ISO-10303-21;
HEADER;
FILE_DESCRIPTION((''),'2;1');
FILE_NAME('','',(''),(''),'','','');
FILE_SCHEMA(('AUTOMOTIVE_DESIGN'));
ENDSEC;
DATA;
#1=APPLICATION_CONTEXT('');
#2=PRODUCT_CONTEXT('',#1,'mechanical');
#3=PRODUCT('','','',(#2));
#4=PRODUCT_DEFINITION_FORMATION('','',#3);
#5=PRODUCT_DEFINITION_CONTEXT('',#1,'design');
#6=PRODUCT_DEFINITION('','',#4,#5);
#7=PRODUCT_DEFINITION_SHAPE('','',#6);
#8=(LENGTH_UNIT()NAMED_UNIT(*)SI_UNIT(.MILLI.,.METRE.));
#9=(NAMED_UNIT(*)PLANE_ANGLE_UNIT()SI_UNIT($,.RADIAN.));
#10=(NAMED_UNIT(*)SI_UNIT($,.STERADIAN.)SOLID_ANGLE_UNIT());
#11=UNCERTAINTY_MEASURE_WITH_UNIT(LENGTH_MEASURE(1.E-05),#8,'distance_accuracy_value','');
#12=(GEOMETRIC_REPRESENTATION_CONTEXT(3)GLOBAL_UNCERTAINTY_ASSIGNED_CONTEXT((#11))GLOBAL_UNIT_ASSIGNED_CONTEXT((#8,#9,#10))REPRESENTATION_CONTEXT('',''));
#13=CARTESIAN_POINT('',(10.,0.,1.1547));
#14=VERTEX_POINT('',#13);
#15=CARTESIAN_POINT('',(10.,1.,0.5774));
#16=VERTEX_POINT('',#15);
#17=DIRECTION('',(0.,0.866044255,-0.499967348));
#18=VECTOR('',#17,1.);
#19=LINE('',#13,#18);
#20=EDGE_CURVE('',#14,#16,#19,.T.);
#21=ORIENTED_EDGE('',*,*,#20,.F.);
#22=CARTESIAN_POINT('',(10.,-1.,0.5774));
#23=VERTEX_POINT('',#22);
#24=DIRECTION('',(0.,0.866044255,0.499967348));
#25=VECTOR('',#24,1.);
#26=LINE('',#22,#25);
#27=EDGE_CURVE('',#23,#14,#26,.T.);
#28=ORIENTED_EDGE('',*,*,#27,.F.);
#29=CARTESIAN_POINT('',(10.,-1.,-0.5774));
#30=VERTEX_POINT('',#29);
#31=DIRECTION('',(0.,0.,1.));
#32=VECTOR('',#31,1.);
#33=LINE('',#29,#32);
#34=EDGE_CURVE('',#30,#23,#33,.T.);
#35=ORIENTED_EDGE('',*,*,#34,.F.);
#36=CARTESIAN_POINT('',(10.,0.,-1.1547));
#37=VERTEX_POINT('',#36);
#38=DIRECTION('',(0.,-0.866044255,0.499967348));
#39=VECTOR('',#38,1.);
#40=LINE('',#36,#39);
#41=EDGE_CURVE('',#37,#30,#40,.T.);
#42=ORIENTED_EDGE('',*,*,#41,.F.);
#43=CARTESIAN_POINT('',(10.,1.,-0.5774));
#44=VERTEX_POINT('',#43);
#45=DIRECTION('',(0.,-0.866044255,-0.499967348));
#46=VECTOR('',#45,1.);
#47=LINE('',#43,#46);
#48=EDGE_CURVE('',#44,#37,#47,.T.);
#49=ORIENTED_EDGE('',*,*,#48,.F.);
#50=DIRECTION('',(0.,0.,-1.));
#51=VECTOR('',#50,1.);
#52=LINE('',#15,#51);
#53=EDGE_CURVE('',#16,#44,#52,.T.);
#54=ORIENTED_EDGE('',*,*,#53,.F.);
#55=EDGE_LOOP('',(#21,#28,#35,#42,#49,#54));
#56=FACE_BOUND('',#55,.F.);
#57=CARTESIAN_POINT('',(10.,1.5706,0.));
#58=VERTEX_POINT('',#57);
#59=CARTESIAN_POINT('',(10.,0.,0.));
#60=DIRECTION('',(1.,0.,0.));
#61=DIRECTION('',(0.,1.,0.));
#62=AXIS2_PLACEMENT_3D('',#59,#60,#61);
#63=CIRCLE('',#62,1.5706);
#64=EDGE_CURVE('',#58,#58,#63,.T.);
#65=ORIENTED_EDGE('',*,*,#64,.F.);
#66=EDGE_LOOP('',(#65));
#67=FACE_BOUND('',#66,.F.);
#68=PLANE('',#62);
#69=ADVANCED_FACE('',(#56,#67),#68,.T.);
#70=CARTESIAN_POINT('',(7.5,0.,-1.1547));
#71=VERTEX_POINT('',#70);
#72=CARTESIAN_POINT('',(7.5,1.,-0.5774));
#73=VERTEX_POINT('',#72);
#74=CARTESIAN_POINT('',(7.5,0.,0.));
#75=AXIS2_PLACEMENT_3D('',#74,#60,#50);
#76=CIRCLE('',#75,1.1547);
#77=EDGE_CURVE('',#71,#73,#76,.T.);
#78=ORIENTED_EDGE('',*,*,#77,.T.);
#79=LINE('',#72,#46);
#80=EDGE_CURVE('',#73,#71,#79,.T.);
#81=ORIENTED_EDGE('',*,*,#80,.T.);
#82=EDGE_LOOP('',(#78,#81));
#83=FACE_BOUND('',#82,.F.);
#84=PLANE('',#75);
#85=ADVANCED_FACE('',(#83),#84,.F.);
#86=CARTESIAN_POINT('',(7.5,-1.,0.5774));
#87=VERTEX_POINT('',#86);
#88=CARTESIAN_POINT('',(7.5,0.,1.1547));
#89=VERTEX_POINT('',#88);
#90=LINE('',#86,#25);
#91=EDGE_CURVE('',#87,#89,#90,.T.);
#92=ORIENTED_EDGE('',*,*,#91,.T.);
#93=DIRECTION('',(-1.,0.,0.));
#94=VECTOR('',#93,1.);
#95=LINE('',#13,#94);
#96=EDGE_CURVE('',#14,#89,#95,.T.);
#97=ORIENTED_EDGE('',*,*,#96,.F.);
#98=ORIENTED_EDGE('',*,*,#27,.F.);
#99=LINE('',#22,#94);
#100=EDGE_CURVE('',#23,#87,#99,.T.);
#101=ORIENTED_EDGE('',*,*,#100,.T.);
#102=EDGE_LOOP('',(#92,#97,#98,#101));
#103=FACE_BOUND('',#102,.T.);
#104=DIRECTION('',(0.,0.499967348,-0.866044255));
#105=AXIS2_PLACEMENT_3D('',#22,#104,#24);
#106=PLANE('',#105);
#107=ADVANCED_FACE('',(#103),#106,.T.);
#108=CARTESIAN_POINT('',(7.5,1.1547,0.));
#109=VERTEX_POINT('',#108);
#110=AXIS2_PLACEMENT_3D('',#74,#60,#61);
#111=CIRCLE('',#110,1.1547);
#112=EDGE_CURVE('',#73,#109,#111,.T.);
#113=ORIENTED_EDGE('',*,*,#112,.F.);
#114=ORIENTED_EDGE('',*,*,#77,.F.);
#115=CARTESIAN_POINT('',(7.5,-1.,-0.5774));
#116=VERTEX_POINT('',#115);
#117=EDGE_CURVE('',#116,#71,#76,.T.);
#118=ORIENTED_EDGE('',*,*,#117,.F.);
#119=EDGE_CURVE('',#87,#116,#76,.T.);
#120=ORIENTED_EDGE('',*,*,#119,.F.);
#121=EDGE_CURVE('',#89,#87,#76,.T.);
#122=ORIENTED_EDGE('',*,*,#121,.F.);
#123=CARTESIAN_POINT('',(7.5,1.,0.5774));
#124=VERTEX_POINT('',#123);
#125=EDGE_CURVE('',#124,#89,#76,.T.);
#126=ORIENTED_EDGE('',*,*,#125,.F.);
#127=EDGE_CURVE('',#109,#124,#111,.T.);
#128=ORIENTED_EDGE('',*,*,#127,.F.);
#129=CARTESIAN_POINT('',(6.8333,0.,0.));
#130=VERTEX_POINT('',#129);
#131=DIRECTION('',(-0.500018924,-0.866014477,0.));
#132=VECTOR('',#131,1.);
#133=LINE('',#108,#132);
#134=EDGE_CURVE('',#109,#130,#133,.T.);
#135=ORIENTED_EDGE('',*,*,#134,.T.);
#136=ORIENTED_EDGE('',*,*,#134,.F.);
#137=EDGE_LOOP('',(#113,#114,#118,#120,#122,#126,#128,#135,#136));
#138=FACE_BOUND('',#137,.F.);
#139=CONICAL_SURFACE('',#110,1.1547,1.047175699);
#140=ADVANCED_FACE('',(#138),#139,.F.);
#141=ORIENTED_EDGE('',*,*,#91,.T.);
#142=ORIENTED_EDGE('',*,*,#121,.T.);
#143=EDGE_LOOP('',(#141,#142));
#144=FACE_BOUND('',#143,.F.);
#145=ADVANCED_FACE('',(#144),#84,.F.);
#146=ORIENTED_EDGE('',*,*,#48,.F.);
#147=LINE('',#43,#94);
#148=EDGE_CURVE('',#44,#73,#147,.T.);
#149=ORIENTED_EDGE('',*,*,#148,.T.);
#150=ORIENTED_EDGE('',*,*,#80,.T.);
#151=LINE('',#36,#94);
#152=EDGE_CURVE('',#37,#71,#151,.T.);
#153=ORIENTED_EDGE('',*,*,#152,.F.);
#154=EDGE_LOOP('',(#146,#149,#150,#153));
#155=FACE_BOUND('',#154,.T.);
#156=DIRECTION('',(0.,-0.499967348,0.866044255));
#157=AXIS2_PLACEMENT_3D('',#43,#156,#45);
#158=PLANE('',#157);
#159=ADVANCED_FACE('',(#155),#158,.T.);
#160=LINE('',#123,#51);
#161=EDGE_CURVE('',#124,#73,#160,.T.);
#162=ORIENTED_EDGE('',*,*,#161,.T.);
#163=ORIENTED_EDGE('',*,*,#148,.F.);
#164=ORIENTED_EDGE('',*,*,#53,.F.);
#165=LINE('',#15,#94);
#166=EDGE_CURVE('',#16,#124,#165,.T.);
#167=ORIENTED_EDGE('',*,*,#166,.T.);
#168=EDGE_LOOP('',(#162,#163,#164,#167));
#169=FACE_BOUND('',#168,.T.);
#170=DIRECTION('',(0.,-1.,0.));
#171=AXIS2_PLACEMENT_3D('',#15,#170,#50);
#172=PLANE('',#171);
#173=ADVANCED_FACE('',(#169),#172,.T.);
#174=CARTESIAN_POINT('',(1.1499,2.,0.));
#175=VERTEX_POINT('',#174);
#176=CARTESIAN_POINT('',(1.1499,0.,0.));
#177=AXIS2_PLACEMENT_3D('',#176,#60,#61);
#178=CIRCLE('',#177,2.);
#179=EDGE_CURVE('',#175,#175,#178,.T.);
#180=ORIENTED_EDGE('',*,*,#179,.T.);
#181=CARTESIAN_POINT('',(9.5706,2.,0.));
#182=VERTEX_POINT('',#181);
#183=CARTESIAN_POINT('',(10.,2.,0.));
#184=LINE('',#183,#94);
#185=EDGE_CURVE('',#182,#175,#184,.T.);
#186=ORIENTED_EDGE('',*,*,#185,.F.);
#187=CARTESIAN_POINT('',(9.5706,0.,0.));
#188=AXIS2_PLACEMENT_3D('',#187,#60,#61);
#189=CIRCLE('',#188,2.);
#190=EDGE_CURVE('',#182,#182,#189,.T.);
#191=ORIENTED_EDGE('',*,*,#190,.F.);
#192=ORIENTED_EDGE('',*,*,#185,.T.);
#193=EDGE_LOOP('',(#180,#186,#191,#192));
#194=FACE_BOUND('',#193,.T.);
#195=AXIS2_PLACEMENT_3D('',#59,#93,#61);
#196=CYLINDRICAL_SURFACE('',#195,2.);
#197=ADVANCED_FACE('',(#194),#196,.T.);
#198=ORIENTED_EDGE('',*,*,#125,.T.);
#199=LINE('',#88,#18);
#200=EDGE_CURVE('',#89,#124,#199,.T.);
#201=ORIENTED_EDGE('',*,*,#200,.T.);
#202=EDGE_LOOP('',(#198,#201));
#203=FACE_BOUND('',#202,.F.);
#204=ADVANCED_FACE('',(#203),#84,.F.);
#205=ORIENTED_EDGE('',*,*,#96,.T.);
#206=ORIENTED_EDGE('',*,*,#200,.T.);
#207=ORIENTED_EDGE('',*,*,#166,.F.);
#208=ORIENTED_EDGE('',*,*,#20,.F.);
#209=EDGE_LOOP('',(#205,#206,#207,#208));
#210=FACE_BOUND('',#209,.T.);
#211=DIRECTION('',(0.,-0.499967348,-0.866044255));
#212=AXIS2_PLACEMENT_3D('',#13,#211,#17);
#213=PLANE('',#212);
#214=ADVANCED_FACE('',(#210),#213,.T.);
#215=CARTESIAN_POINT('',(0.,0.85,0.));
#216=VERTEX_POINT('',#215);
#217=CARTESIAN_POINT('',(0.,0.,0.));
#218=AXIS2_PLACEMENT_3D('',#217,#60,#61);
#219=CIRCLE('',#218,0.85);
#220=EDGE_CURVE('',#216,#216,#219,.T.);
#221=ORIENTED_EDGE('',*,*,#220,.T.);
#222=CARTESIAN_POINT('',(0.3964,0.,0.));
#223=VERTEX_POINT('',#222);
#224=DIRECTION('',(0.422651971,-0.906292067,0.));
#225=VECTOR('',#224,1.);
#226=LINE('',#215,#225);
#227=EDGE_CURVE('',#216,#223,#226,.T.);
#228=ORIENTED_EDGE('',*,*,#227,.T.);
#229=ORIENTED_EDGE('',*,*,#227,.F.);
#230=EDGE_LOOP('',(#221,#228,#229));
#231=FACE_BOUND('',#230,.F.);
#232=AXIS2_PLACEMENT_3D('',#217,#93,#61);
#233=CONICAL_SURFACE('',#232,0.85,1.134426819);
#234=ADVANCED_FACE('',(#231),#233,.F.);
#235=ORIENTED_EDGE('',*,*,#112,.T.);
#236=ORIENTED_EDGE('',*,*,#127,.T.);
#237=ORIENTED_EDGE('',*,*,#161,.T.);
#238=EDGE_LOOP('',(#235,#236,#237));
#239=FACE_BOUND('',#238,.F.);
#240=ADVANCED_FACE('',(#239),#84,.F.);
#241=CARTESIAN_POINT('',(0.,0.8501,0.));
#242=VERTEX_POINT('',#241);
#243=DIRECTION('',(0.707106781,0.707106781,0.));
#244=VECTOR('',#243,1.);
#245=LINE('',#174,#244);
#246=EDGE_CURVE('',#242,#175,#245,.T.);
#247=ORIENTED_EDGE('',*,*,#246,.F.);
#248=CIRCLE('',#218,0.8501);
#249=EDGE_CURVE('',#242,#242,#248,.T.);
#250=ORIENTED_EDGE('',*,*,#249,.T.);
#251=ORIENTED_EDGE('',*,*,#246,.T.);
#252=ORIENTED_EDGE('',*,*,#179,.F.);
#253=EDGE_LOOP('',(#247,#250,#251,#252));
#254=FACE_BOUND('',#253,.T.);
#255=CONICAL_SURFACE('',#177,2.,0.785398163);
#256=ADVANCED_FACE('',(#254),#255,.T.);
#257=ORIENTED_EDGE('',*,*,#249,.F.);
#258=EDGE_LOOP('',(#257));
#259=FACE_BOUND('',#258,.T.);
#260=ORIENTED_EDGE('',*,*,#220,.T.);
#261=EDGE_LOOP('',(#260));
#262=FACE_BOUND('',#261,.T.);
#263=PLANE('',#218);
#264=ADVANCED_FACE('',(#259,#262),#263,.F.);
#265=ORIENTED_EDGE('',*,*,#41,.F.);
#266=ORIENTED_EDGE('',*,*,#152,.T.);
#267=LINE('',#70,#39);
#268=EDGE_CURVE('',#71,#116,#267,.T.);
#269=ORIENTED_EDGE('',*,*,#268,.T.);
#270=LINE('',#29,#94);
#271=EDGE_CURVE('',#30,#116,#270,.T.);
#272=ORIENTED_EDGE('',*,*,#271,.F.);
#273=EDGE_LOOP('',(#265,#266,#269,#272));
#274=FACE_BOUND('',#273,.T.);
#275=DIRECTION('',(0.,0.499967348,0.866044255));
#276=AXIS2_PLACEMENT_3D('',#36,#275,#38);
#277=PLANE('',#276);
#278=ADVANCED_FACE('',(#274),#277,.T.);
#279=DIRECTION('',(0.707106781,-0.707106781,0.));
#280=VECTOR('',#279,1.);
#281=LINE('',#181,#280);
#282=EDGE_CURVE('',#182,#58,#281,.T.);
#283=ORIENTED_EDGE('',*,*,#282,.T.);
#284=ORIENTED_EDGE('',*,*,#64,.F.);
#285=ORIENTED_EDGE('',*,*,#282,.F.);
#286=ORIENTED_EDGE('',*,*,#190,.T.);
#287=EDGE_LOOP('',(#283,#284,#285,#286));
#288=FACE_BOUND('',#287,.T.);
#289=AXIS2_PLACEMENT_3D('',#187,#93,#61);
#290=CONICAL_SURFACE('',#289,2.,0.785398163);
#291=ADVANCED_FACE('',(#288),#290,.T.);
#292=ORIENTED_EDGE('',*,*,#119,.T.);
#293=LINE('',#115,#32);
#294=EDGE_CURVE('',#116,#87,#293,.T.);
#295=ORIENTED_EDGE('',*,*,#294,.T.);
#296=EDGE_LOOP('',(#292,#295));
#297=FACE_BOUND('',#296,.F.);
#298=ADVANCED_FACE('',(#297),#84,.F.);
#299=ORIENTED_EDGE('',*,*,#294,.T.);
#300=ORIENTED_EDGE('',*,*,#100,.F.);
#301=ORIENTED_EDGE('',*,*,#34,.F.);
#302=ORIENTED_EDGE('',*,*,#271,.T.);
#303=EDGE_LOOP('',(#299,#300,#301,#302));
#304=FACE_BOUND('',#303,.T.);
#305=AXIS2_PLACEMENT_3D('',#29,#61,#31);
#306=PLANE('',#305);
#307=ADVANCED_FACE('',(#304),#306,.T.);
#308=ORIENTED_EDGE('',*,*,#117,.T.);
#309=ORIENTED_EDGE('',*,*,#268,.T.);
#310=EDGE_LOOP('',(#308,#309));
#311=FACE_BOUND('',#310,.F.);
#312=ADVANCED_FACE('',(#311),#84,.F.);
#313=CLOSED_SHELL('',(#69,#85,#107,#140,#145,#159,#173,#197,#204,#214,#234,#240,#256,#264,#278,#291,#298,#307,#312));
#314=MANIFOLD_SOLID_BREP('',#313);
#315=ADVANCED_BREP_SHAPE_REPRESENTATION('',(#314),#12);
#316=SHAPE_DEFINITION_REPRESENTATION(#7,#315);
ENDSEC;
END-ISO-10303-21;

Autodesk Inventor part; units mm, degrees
ref_plane "YZ Plane" through (0, 0, 0) normal (1, 0, 0) x (0, 1, 0)
ref_plane "XZ Plane" through (0, 0, 0) normal (0, 1, 0) x (-1, 0, 0)
sketch "Sketch1" plane through (0, 0, 0) normal (0, 0, 1) x (1, 0, 0)
  line L0 (0.3964, 0) -> (6.8333, 0)
  line L1 (10, 1.1547) -> (10, 2)
  line L2 (10, 2) -> (0, 2)
  line L3 (10, 1.1547) -> (7.5, 1.1547)
  line L4 (7.5, 1.1547) -> (6.8333, 0)
  line L5 (0, 0.85) -> (0.3964, 0)
  line L6 (0, -0.4) -> (0, 2.4) projected
  line L7 (0, 0.85) -> (0, 2)
  point P0 (0, 0)
  dimension "d0" = 2.5
  dimension "d1" = 60
  dimension "d2" = 4
  dimension "d3" = 2.3094
  dimension "d4" = 10
  dimension "d5" = 65
  dimension "d7" = 1.7
revolve "Body" add sketch "Sketch1" angle 360 about axis through (0.3964, 0, 0) along (1, 0, 0)
sketch "Sketch2" plane through (10, 0, 0) normal (1, 0, 0) x (0, 0, -1)
  circle A0 centre (0, 0) radius 1.1547 projected
  circle A1 centre (0, 0) radius 2 projected
  line L0 (1.1547, 0) -> (0.5774, -1)
  line L1 (0.5774, -1) -> (-0.5774, -1)
  line L2 (-0.5774, -1) -> (-1.1547, 0)
  line L3 (-1.1547, 0) -> (-0.5774, 1)
  line L4 (-0.5774, 1) -> (0.5774, 1)
  line L5 (0.5774, 1) -> (1.1547, 0)
extrude "Slot" add sketch "Sketch2" against normal blind 2.5 contours L5 A0 | A0 L0 | L4 A0 | A0 L1 | L3 A0 | A0 L2
chamfer "Chamfer1" distance 1.15 angle 45 1 edges at (0, -2, 0) measured on face at (0, 1.5973, -0.1595)
thread "Thread" size "M4x0.7" class "6g" standard "ISO Metric profile" length 10
chamfer "Chamfer2" distance 0.4294 angle 45 1 edges at (10, -2, 0) measured on face at (7.05, 1.9935, -0.1609)
ref_plane "Work Plane1" through (5, 0, 0) normal (0, -0.5, -0.8660254) x (1, 0, 0)
equation "\"d8\" = INTI"
equation "\"d10\" = -0.5 * SPD + 0.5 * NND"
equation "\"d11\" = FAWI"
equation "\"d33\" = -0.5 * SPD + 0.5 * NND"
equation "\"d14\" = NLG"
equation "\"d12\" = -0.5 * GD1 + 0.5 * NND"
equation "\"d13\" = FAWI"
equation "\"d34\" = -0.5 * GD1 + 0.5 * NND"
equation "\"d0\" = INTI"
equation "\"d2\" = NND"
equation "\"d3\" = 1.1547 * SW"
equation "\"d4\" = NLG"
equation "\"d5\" = 0.5 * ANG"
equation "\"d7\" = SPD"
equation "\"NND\" = 4"
equation "\"NLG\" = 10"
equation "\"INTI\" = 2.5"
equation "\"FAWI\" = 45deg"
equation "\"SW\" = 2"
equation "\"GD1\" = THREADDIA - 1.2269 * PTC"
equation "\"ANG\" = 130deg"
equation "\"FAWI1\" = 60deg"
equation "\"SPD\" = 1.7"
equation "\"GUL\" = 0.61345 * PTC"
equation "\"TOA\" = 30deg"
equation "\"THREADDIA\" = 4"
equation "\"PTC\" = 0.7"
equation "\"GAL\" = 0.61345 * PTC"
equation "\"E0\" = 1.155 * SW"
properties part number "AS 1421 - M4 x 10 Cup Point" material "Steel, Mild"
